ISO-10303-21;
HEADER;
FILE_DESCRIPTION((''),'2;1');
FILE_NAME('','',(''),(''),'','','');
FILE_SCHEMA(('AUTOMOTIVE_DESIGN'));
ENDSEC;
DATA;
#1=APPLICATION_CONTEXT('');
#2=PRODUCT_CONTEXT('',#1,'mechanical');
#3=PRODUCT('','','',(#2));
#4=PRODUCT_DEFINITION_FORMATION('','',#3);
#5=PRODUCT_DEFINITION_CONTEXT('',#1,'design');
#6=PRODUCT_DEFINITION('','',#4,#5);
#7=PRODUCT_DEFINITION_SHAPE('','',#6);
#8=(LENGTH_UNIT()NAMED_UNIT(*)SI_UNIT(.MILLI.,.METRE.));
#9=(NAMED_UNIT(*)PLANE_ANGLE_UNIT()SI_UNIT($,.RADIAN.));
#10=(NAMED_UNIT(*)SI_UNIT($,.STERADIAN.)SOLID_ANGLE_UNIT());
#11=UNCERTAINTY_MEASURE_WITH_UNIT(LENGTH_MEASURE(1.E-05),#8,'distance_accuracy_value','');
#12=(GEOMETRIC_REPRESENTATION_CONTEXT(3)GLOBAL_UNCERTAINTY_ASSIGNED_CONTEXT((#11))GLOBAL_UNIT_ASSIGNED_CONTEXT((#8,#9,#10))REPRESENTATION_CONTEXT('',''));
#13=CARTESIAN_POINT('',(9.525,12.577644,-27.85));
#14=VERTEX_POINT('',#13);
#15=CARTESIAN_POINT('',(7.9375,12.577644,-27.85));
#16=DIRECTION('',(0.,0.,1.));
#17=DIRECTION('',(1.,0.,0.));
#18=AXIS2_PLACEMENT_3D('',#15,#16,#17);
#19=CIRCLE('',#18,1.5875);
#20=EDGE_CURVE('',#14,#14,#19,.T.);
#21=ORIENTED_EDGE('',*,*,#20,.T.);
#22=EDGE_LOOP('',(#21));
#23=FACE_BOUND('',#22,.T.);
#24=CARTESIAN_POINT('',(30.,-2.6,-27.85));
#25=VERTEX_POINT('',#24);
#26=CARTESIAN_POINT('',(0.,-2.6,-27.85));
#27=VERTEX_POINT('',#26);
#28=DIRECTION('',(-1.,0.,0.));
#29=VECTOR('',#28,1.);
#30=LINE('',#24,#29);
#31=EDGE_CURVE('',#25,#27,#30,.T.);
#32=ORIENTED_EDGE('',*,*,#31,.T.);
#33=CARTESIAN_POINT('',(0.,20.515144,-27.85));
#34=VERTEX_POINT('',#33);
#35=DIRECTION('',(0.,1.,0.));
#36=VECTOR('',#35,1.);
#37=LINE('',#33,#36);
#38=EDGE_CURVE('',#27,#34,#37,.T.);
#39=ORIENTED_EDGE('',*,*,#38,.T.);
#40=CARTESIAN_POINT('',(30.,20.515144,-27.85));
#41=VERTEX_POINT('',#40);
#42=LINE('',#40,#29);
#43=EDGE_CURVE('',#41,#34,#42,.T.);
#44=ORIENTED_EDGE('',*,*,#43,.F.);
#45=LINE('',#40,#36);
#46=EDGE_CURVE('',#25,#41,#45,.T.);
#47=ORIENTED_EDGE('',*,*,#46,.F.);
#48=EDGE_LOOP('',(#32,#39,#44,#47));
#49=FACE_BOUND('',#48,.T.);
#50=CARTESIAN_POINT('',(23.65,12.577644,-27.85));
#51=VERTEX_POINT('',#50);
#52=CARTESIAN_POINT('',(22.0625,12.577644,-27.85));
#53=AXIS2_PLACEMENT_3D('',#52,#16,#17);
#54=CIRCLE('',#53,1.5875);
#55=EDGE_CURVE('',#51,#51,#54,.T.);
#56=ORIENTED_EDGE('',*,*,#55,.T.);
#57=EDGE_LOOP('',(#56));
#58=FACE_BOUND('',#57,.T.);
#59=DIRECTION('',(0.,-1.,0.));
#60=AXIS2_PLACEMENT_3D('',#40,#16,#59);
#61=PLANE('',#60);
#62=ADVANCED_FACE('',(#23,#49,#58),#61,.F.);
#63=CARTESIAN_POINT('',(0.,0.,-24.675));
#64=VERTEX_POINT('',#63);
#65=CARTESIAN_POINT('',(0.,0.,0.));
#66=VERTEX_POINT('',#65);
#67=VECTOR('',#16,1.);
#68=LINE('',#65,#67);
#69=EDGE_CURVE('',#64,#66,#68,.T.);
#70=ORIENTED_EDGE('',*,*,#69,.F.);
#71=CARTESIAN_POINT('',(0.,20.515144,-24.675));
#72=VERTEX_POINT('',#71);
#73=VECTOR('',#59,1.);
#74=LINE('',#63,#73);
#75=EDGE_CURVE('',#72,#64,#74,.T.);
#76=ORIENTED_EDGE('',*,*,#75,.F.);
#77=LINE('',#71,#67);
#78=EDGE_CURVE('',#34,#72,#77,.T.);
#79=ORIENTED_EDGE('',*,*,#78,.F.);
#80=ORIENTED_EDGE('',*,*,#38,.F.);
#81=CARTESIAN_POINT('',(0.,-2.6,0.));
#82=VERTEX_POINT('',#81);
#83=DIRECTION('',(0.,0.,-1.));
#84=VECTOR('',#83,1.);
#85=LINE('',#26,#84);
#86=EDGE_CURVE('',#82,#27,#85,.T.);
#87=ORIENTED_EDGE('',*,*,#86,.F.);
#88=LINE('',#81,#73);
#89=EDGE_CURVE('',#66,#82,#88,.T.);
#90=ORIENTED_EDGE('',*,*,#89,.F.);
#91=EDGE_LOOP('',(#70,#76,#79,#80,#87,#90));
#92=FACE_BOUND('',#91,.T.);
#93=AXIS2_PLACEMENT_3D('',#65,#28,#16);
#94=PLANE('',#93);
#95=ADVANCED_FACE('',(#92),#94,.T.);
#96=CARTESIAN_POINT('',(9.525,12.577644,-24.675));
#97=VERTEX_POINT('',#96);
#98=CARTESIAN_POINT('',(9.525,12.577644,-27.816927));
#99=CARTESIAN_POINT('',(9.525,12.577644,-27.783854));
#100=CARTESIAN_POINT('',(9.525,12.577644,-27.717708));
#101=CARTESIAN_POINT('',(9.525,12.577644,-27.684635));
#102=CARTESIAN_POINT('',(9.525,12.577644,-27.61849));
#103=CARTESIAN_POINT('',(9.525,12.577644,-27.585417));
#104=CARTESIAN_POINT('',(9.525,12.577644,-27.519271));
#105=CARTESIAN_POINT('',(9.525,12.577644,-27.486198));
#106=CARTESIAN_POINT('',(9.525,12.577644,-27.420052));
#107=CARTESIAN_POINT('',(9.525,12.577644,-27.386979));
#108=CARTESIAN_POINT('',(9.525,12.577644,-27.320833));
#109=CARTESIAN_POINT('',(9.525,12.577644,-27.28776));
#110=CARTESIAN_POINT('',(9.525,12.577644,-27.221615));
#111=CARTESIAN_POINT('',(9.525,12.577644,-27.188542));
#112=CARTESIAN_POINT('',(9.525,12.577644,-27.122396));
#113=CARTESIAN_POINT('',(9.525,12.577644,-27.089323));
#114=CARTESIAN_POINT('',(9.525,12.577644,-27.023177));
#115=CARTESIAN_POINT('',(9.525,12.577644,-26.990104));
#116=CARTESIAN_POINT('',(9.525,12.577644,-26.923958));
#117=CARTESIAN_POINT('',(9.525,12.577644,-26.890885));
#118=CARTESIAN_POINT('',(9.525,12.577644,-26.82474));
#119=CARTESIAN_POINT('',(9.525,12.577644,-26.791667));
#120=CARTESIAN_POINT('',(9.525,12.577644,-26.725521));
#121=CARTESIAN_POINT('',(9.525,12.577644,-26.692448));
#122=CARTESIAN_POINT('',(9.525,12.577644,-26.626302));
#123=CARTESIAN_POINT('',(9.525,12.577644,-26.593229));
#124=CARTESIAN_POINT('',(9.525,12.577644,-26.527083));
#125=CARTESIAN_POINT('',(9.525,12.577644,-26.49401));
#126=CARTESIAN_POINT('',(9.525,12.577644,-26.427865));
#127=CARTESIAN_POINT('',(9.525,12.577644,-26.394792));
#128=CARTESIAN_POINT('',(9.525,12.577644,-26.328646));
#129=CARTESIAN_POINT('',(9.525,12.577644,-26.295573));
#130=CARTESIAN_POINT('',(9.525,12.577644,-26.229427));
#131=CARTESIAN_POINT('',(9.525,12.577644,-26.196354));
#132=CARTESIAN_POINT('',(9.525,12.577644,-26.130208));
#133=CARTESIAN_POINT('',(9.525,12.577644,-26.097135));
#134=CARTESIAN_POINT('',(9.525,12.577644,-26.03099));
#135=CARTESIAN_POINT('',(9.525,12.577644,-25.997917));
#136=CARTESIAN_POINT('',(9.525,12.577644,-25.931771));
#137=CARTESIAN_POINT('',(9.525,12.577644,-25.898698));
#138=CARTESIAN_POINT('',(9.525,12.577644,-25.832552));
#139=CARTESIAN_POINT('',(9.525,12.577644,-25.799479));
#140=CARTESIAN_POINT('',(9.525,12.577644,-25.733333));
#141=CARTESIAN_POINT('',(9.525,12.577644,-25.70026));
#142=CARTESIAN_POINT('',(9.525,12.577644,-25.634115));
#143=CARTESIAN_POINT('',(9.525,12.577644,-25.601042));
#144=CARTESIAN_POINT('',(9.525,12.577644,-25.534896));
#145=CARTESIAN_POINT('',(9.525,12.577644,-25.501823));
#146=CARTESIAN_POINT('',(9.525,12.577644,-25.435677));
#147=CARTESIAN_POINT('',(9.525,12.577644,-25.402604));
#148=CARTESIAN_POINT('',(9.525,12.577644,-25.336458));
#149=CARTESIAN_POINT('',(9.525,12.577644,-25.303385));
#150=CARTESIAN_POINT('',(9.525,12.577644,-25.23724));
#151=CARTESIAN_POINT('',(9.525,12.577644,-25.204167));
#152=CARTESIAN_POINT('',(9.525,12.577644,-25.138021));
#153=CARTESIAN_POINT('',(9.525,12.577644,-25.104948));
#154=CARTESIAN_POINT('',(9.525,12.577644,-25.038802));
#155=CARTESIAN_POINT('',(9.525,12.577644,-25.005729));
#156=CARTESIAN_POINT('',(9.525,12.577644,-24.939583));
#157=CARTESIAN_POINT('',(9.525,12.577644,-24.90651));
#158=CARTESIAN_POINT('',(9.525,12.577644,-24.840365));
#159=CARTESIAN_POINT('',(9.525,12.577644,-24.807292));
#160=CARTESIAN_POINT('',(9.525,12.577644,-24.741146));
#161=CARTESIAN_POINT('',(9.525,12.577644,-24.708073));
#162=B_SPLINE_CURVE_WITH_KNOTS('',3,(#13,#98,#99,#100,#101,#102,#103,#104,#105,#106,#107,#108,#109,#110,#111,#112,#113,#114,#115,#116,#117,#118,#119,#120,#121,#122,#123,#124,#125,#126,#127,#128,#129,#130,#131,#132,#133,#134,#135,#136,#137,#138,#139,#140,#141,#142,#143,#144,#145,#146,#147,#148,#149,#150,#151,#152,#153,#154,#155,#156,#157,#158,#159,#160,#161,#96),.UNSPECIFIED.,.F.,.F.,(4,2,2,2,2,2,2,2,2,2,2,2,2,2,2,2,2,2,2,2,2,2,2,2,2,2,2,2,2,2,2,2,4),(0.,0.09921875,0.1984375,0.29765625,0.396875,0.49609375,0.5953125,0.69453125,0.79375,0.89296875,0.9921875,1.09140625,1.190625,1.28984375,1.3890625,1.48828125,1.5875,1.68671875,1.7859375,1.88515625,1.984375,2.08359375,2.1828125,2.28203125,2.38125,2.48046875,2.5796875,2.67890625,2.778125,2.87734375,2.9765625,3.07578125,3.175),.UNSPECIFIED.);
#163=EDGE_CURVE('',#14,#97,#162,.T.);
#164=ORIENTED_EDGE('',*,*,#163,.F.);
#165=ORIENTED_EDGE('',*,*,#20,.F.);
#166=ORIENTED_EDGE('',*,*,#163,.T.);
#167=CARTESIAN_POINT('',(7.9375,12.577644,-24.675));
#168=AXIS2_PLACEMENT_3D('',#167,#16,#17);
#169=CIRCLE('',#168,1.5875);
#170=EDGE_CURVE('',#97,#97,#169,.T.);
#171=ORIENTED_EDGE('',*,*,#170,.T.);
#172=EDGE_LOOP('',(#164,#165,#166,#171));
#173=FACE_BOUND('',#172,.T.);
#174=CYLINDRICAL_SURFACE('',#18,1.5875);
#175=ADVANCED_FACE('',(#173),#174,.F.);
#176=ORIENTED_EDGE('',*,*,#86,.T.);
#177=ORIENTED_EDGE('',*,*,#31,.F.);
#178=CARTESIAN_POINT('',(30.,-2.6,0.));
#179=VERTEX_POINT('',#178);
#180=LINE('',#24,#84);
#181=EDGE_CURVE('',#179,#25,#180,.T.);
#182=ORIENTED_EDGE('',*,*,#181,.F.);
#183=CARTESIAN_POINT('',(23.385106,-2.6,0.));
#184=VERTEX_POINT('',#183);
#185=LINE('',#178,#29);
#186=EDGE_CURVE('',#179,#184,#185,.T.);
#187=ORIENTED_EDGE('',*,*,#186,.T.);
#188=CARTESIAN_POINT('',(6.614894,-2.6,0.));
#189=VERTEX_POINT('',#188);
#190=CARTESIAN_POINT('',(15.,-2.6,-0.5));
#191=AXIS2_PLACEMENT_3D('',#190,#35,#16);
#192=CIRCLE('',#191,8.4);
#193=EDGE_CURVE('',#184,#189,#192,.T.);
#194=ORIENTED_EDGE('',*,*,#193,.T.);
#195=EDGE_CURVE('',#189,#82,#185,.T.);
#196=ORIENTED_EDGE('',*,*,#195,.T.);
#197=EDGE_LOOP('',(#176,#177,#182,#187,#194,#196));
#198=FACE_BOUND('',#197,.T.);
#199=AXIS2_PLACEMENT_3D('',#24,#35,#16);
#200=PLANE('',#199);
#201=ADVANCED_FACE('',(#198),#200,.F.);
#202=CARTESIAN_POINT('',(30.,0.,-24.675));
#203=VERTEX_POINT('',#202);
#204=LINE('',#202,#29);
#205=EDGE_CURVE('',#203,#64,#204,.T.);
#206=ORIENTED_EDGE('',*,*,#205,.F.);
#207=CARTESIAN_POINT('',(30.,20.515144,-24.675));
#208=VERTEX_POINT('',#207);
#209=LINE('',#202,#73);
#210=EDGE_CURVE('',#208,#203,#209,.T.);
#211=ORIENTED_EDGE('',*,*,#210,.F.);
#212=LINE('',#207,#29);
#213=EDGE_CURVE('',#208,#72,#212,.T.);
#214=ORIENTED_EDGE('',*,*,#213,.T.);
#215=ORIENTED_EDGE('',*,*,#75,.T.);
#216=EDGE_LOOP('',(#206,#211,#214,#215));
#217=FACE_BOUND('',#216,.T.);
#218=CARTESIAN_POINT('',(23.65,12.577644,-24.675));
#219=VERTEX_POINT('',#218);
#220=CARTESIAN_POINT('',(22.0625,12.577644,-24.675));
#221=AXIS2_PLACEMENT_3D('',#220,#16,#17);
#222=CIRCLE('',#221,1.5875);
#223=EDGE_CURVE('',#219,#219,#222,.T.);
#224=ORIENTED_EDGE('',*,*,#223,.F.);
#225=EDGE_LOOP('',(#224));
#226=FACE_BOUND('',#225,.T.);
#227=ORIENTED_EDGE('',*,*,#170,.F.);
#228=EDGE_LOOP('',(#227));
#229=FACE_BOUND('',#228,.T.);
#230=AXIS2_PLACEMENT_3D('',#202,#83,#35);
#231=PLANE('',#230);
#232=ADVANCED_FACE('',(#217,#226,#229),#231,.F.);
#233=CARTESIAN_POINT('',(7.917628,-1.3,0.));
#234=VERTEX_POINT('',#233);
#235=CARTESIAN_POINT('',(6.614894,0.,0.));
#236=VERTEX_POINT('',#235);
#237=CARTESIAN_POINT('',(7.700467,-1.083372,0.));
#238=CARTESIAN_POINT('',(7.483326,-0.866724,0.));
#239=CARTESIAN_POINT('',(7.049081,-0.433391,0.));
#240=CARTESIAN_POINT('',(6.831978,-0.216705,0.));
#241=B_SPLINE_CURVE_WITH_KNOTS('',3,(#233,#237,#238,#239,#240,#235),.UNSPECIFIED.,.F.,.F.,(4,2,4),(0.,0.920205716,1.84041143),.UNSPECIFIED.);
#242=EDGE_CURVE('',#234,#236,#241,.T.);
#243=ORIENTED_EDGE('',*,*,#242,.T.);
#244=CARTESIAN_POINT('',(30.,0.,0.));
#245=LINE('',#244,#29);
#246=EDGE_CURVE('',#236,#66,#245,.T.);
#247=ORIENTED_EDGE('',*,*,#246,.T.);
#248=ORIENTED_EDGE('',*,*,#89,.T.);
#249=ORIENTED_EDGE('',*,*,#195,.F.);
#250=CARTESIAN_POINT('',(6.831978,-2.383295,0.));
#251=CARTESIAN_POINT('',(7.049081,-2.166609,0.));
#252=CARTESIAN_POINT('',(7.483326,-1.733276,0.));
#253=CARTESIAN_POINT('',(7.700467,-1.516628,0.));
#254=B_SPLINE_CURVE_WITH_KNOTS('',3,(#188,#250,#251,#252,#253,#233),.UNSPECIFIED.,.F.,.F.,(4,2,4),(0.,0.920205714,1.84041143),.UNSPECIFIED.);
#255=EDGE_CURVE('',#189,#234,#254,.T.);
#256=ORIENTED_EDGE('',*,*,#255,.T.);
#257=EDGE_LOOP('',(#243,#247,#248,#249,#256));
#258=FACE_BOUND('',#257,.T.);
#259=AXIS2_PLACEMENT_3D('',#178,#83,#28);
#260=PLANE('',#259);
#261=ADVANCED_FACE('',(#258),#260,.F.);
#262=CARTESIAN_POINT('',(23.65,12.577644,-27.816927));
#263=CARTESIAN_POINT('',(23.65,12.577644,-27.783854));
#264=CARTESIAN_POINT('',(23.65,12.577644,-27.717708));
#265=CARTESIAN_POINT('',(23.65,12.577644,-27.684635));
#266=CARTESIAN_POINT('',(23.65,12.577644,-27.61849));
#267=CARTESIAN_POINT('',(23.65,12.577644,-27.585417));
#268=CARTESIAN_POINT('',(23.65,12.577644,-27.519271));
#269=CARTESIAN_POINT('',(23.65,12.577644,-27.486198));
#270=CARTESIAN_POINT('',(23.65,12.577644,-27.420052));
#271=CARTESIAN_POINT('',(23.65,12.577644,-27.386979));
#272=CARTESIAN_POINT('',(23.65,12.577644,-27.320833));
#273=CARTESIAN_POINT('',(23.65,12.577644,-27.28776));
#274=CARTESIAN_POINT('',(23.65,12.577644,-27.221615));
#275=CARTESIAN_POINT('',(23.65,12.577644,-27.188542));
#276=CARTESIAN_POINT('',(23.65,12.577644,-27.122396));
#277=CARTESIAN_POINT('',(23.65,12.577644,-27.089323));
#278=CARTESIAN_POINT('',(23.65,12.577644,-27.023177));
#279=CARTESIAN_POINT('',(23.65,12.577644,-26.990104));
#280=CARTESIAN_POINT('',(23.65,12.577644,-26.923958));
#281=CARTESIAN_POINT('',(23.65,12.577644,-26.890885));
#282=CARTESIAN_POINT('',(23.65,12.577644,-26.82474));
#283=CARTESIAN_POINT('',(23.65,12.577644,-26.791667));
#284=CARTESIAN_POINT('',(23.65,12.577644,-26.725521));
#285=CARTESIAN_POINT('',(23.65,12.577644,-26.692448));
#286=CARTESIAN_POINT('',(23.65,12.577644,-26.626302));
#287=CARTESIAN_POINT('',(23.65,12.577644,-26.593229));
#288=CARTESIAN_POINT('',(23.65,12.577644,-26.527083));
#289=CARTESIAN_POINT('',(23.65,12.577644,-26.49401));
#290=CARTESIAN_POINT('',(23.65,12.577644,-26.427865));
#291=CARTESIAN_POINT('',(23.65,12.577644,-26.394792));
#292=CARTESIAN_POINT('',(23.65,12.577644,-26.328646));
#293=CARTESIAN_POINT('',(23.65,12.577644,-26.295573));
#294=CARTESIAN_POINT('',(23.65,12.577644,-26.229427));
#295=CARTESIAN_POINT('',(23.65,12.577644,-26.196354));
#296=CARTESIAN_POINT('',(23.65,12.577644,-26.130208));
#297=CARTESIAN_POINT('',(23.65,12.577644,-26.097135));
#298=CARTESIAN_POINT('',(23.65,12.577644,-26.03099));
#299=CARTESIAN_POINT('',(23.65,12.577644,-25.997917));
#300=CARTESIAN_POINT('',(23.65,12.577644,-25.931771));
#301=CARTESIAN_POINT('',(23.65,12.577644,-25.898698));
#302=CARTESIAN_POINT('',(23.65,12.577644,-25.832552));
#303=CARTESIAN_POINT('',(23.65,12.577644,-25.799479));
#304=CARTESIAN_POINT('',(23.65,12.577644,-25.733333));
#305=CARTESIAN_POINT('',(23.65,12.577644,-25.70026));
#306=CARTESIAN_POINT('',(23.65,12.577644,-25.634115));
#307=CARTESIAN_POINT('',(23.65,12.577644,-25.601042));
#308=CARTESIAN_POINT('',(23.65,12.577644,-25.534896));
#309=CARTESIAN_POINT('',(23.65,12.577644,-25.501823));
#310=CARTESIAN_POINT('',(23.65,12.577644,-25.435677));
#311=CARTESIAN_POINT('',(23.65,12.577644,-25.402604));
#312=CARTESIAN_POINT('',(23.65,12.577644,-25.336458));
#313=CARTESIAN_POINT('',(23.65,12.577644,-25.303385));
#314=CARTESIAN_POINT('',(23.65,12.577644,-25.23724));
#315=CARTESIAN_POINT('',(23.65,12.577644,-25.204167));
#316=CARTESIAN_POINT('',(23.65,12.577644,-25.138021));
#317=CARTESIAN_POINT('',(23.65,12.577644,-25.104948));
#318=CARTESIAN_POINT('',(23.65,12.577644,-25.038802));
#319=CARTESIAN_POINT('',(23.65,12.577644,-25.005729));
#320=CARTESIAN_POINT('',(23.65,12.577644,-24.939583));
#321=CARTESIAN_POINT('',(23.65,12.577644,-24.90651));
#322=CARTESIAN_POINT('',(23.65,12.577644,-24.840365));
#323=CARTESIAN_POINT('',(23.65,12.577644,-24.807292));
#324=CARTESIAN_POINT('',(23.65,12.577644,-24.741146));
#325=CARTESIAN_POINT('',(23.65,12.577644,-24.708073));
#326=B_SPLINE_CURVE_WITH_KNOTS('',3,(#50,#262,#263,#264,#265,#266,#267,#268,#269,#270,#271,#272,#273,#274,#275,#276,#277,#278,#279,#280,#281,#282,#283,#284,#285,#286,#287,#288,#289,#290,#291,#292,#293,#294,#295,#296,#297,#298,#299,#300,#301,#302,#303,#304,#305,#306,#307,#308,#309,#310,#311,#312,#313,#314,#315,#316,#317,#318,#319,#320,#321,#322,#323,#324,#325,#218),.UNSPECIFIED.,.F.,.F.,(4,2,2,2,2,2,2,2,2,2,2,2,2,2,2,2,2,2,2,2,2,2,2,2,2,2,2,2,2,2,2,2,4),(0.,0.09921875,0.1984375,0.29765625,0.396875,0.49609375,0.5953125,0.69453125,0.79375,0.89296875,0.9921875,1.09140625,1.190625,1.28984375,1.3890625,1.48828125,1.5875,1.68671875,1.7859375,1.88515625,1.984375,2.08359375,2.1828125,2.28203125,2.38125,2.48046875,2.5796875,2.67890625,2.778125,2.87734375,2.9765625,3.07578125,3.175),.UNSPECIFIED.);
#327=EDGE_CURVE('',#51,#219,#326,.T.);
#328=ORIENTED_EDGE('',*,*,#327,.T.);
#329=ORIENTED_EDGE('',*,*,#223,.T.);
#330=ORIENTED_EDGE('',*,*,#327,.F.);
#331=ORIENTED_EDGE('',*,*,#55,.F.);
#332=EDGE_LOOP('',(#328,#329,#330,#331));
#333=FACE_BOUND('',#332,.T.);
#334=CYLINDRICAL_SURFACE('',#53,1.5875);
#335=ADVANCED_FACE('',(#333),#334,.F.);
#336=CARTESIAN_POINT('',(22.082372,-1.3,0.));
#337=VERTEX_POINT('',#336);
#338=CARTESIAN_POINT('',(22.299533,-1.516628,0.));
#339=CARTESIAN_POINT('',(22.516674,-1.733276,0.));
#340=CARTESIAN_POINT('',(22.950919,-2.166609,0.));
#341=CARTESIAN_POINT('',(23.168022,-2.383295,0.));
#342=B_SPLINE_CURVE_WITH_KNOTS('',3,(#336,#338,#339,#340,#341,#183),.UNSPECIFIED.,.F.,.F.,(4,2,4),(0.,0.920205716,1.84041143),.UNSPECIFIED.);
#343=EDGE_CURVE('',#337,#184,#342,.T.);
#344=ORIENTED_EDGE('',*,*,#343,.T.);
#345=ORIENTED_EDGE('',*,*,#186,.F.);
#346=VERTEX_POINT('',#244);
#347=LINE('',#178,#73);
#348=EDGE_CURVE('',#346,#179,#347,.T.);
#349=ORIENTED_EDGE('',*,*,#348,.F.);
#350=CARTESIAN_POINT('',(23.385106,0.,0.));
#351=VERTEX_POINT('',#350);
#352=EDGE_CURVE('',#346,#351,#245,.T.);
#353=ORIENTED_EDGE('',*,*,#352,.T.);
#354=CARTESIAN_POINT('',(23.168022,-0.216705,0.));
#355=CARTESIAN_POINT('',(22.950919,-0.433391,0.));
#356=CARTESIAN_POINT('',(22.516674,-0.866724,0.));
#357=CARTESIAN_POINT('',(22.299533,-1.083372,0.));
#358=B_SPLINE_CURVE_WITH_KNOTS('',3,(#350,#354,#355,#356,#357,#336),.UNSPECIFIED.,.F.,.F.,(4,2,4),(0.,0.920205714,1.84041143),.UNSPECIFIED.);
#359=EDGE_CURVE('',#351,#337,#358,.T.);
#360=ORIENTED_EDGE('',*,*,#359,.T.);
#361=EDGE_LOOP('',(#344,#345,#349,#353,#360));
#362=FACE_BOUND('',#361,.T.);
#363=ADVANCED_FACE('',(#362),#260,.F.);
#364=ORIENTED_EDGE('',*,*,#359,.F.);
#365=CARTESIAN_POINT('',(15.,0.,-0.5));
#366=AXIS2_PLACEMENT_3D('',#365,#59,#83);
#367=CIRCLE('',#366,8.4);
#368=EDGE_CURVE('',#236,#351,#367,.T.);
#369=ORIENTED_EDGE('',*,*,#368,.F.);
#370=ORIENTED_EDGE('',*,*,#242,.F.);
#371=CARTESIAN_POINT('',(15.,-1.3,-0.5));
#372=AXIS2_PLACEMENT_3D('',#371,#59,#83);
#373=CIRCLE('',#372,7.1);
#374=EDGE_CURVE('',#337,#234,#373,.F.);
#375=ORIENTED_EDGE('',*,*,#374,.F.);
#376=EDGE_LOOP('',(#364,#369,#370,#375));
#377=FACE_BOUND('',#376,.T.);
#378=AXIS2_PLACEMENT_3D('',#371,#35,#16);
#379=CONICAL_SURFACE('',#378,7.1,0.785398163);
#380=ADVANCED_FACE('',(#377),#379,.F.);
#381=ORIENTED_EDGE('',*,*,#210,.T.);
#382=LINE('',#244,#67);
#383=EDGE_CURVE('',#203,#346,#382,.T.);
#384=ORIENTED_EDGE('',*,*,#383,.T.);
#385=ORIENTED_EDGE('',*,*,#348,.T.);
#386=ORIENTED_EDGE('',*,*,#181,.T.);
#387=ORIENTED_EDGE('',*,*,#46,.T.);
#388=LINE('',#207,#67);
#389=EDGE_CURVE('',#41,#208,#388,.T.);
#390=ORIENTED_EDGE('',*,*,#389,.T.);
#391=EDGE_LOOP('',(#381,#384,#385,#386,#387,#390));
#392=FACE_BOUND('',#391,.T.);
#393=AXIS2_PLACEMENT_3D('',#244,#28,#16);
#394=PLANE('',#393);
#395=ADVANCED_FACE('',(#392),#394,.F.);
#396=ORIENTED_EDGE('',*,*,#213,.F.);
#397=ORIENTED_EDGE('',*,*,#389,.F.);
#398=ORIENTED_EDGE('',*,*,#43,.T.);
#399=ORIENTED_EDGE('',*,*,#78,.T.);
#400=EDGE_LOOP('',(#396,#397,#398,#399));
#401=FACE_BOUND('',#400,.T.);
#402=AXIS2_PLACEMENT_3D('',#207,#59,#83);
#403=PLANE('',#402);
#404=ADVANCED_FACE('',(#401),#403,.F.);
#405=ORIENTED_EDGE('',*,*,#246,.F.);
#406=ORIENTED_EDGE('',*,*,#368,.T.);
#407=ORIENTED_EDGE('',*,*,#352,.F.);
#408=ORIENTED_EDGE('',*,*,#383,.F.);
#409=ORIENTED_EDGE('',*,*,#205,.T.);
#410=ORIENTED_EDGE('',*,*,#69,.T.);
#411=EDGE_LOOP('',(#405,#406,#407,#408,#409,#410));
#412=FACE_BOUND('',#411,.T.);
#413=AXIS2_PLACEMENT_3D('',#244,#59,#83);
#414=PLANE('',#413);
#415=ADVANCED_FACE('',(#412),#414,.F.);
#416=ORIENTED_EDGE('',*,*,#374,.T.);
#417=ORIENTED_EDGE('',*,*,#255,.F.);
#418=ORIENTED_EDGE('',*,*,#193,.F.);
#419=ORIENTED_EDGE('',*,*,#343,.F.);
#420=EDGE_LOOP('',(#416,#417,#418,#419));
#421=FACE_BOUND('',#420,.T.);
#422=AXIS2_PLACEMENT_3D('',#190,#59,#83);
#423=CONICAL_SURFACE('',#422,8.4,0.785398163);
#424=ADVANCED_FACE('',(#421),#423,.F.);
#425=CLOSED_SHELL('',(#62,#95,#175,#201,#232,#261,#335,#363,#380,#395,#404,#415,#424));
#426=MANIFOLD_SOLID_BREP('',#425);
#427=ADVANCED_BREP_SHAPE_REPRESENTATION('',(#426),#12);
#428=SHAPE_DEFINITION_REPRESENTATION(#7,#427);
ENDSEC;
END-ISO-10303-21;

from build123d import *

# Parameters (mm, degrees)
PROFILE_BOSS_EXTRUDE1_DEPTH      = 30
COLLARCUT_EXTRUDE1_DEPTH         = 46.78748337
COLLAR_CHAMFER2_SIZE             = 1.3
MOUNTINGHOLES_SKETCH3_R          = 1.5875
MOUNTINGHOLES_CUT_EXTRUDE2_DEPTH = 44.928655321


with BuildPart() as part:
    # Profile-Sketch1 → Profile-Boss-Extrude1 (new body)
    with BuildSketch(Plane(origin=(0, 0, 0), x_dir=(0, 0, -1), z_dir=(1, 0, 0))):
        Polygon((0, 0), (24.675, 0), (24.675, 20.515144), (27.85, 20.515144), (27.85, -2.6), (0, -2.6), align=None)
    extrude(amount=PROFILE_BOSS_EXTRUDE1_DEPTH)

    # CollarSketch2 → CollarCut-Extrude1 (cut, through all)
    with BuildSketch(Plane(origin=(0, 0, 0), x_dir=(1, 0, 0), z_dir=(0, 1, 0))):
        with BuildLine():
            Line((7.917627516, 0), (22.082372484, 0))
            ThreePointArc((22.082372484, 0), (15, 7.6), (7.917627516, 0))
        make_face()
    extrude(amount=-COLLARCUT_EXTRUDE1_DEPTH, mode=Mode.SUBTRACT)

    # Collar-Chamfer2
    collar_chamfer2_edges = [part.edges().sort_by_distance(p)[0] for p in [
        (15, -2.6, -7.6),
        (15, 0, -7.6),
    ]]
    chamfer(collar_chamfer2_edges, length=COLLAR_CHAMFER2_SIZE - 0.0001)  # a hair under: the kernel refuses the full size

    # MountingHoles-Sketch3 → MountingHoles-Cut-Extrude2 (cut, through all)
    with BuildSketch(Plane.XY.offset(-24.675)):
        with Locations((7.9375, 12.577644)):
            Circle(MOUNTINGHOLES_SKETCH3_R)
        with Locations((22.0625, 12.577644)):
            Circle(MOUNTINGHOLES_SKETCH3_R)
    extrude(amount=-MOUNTINGHOLES_CUT_EXTRUDE2_DEPTH, mode=Mode.SUBTRACT)


solid = part.part
